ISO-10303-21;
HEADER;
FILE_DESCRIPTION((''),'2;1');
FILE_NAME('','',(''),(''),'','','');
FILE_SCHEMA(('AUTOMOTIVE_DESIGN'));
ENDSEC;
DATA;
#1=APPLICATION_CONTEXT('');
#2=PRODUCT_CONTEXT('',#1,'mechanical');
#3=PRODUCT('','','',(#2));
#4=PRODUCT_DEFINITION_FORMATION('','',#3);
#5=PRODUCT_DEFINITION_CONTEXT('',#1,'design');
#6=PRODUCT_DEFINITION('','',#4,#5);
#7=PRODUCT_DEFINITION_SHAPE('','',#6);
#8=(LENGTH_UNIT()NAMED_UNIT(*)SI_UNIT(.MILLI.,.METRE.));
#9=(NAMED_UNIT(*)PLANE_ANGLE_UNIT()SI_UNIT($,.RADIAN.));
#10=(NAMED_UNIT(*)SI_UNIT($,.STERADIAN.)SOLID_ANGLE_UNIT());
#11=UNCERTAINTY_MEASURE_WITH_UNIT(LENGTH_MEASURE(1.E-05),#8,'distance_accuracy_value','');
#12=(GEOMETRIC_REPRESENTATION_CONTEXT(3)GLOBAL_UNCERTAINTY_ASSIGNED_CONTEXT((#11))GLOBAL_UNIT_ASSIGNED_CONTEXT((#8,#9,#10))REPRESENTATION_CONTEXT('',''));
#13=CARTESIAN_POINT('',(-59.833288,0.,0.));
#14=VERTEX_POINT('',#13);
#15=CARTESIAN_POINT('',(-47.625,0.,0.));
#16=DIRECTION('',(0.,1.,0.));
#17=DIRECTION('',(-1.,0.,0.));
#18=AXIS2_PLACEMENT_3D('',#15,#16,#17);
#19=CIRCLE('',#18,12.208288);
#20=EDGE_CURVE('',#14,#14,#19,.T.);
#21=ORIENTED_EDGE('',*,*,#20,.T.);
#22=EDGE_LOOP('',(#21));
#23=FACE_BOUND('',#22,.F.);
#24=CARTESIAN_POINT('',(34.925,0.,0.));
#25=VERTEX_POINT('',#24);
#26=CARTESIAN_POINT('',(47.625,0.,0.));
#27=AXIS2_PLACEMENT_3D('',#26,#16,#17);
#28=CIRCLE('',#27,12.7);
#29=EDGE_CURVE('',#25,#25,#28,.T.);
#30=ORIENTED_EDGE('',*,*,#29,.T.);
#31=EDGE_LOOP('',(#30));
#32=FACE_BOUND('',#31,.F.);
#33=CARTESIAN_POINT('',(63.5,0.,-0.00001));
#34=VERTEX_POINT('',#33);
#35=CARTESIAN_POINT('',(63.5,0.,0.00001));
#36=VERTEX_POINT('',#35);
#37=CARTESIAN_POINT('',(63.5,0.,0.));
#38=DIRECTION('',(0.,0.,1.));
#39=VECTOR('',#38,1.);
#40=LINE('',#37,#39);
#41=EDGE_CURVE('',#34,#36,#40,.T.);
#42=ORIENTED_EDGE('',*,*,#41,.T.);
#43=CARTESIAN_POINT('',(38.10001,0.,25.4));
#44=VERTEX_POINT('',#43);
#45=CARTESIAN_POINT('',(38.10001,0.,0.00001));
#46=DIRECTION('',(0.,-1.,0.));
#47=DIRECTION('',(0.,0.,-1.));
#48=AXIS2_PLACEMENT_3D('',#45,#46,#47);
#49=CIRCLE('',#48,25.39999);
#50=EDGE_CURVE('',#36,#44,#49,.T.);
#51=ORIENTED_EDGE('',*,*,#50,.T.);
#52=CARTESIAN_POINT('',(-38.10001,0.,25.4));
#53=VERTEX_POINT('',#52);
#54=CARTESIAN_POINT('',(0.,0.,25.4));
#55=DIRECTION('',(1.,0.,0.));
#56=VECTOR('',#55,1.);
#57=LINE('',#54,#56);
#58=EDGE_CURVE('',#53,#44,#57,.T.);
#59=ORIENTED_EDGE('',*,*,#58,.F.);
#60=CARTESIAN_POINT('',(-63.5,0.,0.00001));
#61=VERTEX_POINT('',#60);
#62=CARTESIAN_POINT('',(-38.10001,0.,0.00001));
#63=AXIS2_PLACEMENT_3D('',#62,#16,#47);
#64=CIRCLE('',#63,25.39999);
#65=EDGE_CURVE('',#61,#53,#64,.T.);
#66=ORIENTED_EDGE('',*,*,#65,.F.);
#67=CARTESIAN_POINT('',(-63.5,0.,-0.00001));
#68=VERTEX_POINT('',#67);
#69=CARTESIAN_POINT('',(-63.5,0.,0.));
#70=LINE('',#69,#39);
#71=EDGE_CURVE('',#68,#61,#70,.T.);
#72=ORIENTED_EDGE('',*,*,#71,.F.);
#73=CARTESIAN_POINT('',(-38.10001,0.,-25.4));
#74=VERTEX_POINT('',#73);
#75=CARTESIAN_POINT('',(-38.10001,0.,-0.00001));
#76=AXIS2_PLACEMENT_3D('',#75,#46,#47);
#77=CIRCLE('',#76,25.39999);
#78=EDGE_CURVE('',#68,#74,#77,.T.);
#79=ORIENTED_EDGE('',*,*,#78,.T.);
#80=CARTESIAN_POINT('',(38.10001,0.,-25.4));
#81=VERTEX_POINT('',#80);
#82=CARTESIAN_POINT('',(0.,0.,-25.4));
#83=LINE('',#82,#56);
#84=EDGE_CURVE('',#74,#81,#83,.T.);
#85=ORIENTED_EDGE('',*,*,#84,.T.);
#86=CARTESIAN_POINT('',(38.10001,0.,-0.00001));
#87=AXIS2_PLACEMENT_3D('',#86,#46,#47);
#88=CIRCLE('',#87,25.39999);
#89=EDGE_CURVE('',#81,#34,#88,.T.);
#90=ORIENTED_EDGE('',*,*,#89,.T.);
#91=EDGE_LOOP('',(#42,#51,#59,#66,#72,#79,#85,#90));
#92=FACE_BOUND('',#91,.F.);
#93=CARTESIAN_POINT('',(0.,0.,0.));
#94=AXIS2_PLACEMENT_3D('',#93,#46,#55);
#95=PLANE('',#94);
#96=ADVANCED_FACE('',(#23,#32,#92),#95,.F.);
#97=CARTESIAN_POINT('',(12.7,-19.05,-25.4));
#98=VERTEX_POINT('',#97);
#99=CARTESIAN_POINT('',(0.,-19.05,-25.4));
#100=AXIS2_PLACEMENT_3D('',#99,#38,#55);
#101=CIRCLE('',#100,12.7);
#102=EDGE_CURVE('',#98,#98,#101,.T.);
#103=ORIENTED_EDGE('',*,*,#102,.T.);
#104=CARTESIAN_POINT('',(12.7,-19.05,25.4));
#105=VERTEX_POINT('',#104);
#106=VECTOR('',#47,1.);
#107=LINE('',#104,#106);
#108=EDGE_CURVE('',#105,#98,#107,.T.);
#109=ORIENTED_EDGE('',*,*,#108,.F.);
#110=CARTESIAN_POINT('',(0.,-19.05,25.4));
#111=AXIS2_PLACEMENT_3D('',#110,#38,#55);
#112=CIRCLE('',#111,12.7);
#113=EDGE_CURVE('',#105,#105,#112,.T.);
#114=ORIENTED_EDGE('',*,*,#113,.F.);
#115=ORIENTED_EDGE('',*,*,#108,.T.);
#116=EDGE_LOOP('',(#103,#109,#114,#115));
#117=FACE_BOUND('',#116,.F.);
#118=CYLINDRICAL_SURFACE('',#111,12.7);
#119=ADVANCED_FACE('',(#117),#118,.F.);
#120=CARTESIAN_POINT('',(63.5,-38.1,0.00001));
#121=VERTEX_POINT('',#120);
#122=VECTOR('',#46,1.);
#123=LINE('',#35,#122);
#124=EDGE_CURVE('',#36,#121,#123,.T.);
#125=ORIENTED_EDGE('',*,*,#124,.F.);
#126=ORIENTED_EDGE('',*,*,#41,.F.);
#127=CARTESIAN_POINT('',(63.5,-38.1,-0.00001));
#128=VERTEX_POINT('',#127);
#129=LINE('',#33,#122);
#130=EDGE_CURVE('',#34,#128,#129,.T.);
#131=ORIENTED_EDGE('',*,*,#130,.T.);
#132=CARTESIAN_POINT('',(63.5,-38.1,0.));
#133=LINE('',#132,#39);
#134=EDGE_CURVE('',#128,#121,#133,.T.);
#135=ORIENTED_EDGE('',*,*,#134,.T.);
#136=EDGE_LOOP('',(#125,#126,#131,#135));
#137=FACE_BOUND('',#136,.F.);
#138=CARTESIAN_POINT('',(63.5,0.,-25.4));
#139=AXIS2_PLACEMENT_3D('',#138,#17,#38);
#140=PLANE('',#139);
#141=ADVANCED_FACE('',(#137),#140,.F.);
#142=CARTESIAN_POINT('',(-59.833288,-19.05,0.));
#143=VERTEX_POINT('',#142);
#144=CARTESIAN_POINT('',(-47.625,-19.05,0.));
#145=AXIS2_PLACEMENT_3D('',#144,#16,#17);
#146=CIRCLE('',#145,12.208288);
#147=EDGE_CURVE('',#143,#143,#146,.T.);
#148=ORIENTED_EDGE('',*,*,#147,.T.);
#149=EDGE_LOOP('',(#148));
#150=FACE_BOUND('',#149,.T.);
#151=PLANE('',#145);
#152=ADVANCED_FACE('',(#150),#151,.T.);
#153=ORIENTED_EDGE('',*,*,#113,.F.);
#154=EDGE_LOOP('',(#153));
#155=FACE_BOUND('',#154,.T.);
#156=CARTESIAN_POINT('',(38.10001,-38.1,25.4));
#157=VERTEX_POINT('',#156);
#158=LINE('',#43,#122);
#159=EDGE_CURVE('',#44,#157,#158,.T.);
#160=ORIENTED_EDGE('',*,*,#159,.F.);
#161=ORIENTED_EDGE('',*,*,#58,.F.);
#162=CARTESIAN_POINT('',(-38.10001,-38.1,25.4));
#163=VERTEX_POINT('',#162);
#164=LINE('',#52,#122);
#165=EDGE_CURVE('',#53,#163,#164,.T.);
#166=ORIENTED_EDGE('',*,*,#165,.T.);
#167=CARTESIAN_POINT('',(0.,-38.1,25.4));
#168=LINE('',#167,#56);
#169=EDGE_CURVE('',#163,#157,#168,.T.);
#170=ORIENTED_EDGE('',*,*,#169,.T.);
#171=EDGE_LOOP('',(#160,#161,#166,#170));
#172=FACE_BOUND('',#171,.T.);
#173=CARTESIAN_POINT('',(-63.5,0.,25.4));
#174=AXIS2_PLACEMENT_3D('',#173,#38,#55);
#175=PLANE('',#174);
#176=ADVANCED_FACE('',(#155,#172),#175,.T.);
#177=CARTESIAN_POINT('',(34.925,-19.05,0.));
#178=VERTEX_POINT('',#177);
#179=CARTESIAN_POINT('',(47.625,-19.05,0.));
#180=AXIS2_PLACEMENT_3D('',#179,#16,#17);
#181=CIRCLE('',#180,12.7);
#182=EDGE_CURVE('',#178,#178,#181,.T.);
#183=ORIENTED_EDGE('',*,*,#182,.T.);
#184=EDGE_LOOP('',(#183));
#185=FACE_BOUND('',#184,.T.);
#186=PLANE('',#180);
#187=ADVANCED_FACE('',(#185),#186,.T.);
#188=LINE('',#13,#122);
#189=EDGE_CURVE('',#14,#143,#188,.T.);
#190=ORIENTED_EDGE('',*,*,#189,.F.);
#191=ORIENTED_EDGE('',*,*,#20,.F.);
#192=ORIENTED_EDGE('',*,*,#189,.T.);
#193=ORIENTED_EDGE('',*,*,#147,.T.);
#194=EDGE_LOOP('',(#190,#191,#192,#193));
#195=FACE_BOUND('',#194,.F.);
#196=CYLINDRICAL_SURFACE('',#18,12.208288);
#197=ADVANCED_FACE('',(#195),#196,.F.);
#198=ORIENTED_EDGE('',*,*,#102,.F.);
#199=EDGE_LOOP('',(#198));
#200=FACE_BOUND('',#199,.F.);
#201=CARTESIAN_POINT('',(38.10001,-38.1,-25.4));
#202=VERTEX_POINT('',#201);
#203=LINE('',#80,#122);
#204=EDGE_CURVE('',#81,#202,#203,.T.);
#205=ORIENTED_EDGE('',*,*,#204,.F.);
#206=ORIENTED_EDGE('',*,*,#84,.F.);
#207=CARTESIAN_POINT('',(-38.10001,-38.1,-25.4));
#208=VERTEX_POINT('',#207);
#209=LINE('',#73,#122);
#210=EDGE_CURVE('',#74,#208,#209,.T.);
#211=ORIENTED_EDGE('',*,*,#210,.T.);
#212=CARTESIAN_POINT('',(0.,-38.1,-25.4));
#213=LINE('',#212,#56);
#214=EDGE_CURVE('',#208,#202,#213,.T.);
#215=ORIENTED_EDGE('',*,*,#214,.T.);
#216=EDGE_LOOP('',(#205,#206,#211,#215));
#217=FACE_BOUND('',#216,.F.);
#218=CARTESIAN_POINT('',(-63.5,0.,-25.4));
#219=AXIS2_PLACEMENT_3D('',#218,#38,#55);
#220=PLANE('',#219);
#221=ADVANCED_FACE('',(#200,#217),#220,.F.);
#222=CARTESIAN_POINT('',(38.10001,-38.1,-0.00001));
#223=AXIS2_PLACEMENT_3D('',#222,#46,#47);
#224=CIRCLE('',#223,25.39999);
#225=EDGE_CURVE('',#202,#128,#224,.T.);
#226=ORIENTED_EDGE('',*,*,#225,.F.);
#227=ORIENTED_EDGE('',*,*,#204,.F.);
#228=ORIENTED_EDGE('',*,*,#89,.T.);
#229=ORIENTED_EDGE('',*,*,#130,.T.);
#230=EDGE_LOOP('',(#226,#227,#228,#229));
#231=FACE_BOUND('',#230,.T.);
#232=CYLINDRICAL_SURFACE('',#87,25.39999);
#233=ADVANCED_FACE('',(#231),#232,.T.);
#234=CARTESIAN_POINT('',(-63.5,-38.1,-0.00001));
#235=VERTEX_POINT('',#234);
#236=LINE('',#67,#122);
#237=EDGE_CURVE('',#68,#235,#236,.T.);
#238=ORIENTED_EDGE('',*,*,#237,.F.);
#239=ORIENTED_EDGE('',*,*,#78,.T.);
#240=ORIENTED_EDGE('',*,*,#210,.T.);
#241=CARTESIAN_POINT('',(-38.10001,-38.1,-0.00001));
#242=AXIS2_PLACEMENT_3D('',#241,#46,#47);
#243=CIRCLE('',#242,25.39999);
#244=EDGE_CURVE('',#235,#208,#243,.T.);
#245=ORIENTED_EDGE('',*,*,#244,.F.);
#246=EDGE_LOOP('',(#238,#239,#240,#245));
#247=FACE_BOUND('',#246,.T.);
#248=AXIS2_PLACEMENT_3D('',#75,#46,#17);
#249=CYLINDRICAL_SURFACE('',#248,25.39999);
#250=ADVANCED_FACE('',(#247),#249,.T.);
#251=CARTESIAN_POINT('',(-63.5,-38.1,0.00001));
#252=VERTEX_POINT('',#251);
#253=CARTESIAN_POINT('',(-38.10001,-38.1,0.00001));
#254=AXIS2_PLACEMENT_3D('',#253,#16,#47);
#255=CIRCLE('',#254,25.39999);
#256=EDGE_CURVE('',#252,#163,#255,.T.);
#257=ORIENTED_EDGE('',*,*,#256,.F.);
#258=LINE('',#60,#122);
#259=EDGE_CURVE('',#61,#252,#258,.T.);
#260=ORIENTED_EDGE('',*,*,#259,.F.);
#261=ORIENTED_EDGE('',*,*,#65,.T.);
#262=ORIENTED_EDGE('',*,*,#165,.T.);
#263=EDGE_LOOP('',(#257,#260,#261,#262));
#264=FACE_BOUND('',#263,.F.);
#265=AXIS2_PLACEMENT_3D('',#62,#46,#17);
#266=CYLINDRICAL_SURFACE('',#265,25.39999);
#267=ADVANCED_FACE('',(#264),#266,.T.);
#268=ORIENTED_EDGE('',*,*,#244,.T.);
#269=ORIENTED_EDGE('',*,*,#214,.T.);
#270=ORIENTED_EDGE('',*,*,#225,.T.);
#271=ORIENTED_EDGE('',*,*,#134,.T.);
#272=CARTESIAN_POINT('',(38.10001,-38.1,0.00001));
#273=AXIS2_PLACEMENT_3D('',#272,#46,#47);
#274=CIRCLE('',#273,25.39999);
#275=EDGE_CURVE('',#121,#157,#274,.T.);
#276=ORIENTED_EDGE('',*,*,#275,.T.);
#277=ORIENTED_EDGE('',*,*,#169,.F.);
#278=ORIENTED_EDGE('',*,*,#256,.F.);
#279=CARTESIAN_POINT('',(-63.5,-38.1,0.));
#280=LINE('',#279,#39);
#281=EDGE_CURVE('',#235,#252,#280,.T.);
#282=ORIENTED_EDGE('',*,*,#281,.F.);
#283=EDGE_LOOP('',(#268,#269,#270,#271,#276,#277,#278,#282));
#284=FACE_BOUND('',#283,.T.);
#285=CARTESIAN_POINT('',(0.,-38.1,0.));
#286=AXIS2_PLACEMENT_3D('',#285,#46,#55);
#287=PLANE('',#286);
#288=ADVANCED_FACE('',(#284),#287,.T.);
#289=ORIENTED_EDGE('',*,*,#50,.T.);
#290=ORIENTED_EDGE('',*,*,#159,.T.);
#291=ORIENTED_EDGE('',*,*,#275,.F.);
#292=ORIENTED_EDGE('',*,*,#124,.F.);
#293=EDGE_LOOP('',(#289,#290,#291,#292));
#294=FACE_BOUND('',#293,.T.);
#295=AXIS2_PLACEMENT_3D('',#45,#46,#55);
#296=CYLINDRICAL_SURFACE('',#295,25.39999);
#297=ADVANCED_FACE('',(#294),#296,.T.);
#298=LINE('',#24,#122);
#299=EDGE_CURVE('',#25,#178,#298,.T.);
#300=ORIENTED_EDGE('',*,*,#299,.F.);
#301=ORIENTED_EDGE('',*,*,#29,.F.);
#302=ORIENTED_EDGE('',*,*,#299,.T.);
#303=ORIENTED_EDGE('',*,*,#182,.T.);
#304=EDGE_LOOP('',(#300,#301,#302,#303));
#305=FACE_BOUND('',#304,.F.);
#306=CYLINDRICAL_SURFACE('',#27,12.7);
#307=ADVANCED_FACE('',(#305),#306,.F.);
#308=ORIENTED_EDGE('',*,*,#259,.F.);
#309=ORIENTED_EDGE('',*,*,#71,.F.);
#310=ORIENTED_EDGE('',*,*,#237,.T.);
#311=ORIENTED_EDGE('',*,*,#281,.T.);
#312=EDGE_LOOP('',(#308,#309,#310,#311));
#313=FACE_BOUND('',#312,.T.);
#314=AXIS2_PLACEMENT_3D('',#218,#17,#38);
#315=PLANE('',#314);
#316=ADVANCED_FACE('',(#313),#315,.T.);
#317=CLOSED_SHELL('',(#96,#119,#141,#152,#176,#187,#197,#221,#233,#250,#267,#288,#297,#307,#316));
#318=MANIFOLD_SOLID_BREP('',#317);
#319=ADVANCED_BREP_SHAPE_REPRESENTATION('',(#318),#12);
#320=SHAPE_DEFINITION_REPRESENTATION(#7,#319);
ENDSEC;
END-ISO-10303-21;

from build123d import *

# Parameters (mm, degrees)
F0_W     = 127
F0_H     = 50.8
F1_DEPTH = 38.1
F2_R     = 25.39999
F3_R     = 12.2082879552
F3_R_2   = 12.7
F4_DEPTH = 19.05
F5_R     = 12.7
F6_DEPTH = 50.8


# Not quite as in the source:
# - a fillet or chamfer is up to 0.001 mm smaller than in the source, because OpenCascade refuses the exact size


with BuildPart() as f1:
    # F0 (on Front) → F1 (new body)
    with BuildSketch(Plane.XZ):
        Rectangle(F0_W, F0_H)
    extrude(amount=F1_DEPTH)

    # F2 (radius 25.4 in the source; OpenCascade refuses exactly that, so slightly less here)
    f2_edges = [f1.edges().sort_by_distance(p)[0] for p in [
        (63.5, -19.05, 25.4),
        (63.5, -19.05, -25.4),
        (-63.5, -19.05, 25.4),
        (-63.5, -19.05, -25.4),
    ]]
    fillet(f2_edges, radius=F2_R)

    # F3 (on face) → F4 (cut)
    with BuildSketch(Plane(origin=(0, 0, 0), x_dir=(-1, 0, 0), z_dir=(0, 1, 0))):
        with Locations((47.625, 0)):
            Circle(F3_R)
        with Locations((-47.625, 0)):
            Circle(F3_R_2)
    extrude(amount=-F4_DEPTH, mode=Mode.SUBTRACT)

    # F5 (on face) → F6 (cut)
    with BuildSketch(Plane.XY.offset(25.4)):
        with Locations((0, -19.05)):
            Circle(F5_R)
    extrude(amount=-F6_DEPTH, mode=Mode.SUBTRACT)


solid = f1.part
